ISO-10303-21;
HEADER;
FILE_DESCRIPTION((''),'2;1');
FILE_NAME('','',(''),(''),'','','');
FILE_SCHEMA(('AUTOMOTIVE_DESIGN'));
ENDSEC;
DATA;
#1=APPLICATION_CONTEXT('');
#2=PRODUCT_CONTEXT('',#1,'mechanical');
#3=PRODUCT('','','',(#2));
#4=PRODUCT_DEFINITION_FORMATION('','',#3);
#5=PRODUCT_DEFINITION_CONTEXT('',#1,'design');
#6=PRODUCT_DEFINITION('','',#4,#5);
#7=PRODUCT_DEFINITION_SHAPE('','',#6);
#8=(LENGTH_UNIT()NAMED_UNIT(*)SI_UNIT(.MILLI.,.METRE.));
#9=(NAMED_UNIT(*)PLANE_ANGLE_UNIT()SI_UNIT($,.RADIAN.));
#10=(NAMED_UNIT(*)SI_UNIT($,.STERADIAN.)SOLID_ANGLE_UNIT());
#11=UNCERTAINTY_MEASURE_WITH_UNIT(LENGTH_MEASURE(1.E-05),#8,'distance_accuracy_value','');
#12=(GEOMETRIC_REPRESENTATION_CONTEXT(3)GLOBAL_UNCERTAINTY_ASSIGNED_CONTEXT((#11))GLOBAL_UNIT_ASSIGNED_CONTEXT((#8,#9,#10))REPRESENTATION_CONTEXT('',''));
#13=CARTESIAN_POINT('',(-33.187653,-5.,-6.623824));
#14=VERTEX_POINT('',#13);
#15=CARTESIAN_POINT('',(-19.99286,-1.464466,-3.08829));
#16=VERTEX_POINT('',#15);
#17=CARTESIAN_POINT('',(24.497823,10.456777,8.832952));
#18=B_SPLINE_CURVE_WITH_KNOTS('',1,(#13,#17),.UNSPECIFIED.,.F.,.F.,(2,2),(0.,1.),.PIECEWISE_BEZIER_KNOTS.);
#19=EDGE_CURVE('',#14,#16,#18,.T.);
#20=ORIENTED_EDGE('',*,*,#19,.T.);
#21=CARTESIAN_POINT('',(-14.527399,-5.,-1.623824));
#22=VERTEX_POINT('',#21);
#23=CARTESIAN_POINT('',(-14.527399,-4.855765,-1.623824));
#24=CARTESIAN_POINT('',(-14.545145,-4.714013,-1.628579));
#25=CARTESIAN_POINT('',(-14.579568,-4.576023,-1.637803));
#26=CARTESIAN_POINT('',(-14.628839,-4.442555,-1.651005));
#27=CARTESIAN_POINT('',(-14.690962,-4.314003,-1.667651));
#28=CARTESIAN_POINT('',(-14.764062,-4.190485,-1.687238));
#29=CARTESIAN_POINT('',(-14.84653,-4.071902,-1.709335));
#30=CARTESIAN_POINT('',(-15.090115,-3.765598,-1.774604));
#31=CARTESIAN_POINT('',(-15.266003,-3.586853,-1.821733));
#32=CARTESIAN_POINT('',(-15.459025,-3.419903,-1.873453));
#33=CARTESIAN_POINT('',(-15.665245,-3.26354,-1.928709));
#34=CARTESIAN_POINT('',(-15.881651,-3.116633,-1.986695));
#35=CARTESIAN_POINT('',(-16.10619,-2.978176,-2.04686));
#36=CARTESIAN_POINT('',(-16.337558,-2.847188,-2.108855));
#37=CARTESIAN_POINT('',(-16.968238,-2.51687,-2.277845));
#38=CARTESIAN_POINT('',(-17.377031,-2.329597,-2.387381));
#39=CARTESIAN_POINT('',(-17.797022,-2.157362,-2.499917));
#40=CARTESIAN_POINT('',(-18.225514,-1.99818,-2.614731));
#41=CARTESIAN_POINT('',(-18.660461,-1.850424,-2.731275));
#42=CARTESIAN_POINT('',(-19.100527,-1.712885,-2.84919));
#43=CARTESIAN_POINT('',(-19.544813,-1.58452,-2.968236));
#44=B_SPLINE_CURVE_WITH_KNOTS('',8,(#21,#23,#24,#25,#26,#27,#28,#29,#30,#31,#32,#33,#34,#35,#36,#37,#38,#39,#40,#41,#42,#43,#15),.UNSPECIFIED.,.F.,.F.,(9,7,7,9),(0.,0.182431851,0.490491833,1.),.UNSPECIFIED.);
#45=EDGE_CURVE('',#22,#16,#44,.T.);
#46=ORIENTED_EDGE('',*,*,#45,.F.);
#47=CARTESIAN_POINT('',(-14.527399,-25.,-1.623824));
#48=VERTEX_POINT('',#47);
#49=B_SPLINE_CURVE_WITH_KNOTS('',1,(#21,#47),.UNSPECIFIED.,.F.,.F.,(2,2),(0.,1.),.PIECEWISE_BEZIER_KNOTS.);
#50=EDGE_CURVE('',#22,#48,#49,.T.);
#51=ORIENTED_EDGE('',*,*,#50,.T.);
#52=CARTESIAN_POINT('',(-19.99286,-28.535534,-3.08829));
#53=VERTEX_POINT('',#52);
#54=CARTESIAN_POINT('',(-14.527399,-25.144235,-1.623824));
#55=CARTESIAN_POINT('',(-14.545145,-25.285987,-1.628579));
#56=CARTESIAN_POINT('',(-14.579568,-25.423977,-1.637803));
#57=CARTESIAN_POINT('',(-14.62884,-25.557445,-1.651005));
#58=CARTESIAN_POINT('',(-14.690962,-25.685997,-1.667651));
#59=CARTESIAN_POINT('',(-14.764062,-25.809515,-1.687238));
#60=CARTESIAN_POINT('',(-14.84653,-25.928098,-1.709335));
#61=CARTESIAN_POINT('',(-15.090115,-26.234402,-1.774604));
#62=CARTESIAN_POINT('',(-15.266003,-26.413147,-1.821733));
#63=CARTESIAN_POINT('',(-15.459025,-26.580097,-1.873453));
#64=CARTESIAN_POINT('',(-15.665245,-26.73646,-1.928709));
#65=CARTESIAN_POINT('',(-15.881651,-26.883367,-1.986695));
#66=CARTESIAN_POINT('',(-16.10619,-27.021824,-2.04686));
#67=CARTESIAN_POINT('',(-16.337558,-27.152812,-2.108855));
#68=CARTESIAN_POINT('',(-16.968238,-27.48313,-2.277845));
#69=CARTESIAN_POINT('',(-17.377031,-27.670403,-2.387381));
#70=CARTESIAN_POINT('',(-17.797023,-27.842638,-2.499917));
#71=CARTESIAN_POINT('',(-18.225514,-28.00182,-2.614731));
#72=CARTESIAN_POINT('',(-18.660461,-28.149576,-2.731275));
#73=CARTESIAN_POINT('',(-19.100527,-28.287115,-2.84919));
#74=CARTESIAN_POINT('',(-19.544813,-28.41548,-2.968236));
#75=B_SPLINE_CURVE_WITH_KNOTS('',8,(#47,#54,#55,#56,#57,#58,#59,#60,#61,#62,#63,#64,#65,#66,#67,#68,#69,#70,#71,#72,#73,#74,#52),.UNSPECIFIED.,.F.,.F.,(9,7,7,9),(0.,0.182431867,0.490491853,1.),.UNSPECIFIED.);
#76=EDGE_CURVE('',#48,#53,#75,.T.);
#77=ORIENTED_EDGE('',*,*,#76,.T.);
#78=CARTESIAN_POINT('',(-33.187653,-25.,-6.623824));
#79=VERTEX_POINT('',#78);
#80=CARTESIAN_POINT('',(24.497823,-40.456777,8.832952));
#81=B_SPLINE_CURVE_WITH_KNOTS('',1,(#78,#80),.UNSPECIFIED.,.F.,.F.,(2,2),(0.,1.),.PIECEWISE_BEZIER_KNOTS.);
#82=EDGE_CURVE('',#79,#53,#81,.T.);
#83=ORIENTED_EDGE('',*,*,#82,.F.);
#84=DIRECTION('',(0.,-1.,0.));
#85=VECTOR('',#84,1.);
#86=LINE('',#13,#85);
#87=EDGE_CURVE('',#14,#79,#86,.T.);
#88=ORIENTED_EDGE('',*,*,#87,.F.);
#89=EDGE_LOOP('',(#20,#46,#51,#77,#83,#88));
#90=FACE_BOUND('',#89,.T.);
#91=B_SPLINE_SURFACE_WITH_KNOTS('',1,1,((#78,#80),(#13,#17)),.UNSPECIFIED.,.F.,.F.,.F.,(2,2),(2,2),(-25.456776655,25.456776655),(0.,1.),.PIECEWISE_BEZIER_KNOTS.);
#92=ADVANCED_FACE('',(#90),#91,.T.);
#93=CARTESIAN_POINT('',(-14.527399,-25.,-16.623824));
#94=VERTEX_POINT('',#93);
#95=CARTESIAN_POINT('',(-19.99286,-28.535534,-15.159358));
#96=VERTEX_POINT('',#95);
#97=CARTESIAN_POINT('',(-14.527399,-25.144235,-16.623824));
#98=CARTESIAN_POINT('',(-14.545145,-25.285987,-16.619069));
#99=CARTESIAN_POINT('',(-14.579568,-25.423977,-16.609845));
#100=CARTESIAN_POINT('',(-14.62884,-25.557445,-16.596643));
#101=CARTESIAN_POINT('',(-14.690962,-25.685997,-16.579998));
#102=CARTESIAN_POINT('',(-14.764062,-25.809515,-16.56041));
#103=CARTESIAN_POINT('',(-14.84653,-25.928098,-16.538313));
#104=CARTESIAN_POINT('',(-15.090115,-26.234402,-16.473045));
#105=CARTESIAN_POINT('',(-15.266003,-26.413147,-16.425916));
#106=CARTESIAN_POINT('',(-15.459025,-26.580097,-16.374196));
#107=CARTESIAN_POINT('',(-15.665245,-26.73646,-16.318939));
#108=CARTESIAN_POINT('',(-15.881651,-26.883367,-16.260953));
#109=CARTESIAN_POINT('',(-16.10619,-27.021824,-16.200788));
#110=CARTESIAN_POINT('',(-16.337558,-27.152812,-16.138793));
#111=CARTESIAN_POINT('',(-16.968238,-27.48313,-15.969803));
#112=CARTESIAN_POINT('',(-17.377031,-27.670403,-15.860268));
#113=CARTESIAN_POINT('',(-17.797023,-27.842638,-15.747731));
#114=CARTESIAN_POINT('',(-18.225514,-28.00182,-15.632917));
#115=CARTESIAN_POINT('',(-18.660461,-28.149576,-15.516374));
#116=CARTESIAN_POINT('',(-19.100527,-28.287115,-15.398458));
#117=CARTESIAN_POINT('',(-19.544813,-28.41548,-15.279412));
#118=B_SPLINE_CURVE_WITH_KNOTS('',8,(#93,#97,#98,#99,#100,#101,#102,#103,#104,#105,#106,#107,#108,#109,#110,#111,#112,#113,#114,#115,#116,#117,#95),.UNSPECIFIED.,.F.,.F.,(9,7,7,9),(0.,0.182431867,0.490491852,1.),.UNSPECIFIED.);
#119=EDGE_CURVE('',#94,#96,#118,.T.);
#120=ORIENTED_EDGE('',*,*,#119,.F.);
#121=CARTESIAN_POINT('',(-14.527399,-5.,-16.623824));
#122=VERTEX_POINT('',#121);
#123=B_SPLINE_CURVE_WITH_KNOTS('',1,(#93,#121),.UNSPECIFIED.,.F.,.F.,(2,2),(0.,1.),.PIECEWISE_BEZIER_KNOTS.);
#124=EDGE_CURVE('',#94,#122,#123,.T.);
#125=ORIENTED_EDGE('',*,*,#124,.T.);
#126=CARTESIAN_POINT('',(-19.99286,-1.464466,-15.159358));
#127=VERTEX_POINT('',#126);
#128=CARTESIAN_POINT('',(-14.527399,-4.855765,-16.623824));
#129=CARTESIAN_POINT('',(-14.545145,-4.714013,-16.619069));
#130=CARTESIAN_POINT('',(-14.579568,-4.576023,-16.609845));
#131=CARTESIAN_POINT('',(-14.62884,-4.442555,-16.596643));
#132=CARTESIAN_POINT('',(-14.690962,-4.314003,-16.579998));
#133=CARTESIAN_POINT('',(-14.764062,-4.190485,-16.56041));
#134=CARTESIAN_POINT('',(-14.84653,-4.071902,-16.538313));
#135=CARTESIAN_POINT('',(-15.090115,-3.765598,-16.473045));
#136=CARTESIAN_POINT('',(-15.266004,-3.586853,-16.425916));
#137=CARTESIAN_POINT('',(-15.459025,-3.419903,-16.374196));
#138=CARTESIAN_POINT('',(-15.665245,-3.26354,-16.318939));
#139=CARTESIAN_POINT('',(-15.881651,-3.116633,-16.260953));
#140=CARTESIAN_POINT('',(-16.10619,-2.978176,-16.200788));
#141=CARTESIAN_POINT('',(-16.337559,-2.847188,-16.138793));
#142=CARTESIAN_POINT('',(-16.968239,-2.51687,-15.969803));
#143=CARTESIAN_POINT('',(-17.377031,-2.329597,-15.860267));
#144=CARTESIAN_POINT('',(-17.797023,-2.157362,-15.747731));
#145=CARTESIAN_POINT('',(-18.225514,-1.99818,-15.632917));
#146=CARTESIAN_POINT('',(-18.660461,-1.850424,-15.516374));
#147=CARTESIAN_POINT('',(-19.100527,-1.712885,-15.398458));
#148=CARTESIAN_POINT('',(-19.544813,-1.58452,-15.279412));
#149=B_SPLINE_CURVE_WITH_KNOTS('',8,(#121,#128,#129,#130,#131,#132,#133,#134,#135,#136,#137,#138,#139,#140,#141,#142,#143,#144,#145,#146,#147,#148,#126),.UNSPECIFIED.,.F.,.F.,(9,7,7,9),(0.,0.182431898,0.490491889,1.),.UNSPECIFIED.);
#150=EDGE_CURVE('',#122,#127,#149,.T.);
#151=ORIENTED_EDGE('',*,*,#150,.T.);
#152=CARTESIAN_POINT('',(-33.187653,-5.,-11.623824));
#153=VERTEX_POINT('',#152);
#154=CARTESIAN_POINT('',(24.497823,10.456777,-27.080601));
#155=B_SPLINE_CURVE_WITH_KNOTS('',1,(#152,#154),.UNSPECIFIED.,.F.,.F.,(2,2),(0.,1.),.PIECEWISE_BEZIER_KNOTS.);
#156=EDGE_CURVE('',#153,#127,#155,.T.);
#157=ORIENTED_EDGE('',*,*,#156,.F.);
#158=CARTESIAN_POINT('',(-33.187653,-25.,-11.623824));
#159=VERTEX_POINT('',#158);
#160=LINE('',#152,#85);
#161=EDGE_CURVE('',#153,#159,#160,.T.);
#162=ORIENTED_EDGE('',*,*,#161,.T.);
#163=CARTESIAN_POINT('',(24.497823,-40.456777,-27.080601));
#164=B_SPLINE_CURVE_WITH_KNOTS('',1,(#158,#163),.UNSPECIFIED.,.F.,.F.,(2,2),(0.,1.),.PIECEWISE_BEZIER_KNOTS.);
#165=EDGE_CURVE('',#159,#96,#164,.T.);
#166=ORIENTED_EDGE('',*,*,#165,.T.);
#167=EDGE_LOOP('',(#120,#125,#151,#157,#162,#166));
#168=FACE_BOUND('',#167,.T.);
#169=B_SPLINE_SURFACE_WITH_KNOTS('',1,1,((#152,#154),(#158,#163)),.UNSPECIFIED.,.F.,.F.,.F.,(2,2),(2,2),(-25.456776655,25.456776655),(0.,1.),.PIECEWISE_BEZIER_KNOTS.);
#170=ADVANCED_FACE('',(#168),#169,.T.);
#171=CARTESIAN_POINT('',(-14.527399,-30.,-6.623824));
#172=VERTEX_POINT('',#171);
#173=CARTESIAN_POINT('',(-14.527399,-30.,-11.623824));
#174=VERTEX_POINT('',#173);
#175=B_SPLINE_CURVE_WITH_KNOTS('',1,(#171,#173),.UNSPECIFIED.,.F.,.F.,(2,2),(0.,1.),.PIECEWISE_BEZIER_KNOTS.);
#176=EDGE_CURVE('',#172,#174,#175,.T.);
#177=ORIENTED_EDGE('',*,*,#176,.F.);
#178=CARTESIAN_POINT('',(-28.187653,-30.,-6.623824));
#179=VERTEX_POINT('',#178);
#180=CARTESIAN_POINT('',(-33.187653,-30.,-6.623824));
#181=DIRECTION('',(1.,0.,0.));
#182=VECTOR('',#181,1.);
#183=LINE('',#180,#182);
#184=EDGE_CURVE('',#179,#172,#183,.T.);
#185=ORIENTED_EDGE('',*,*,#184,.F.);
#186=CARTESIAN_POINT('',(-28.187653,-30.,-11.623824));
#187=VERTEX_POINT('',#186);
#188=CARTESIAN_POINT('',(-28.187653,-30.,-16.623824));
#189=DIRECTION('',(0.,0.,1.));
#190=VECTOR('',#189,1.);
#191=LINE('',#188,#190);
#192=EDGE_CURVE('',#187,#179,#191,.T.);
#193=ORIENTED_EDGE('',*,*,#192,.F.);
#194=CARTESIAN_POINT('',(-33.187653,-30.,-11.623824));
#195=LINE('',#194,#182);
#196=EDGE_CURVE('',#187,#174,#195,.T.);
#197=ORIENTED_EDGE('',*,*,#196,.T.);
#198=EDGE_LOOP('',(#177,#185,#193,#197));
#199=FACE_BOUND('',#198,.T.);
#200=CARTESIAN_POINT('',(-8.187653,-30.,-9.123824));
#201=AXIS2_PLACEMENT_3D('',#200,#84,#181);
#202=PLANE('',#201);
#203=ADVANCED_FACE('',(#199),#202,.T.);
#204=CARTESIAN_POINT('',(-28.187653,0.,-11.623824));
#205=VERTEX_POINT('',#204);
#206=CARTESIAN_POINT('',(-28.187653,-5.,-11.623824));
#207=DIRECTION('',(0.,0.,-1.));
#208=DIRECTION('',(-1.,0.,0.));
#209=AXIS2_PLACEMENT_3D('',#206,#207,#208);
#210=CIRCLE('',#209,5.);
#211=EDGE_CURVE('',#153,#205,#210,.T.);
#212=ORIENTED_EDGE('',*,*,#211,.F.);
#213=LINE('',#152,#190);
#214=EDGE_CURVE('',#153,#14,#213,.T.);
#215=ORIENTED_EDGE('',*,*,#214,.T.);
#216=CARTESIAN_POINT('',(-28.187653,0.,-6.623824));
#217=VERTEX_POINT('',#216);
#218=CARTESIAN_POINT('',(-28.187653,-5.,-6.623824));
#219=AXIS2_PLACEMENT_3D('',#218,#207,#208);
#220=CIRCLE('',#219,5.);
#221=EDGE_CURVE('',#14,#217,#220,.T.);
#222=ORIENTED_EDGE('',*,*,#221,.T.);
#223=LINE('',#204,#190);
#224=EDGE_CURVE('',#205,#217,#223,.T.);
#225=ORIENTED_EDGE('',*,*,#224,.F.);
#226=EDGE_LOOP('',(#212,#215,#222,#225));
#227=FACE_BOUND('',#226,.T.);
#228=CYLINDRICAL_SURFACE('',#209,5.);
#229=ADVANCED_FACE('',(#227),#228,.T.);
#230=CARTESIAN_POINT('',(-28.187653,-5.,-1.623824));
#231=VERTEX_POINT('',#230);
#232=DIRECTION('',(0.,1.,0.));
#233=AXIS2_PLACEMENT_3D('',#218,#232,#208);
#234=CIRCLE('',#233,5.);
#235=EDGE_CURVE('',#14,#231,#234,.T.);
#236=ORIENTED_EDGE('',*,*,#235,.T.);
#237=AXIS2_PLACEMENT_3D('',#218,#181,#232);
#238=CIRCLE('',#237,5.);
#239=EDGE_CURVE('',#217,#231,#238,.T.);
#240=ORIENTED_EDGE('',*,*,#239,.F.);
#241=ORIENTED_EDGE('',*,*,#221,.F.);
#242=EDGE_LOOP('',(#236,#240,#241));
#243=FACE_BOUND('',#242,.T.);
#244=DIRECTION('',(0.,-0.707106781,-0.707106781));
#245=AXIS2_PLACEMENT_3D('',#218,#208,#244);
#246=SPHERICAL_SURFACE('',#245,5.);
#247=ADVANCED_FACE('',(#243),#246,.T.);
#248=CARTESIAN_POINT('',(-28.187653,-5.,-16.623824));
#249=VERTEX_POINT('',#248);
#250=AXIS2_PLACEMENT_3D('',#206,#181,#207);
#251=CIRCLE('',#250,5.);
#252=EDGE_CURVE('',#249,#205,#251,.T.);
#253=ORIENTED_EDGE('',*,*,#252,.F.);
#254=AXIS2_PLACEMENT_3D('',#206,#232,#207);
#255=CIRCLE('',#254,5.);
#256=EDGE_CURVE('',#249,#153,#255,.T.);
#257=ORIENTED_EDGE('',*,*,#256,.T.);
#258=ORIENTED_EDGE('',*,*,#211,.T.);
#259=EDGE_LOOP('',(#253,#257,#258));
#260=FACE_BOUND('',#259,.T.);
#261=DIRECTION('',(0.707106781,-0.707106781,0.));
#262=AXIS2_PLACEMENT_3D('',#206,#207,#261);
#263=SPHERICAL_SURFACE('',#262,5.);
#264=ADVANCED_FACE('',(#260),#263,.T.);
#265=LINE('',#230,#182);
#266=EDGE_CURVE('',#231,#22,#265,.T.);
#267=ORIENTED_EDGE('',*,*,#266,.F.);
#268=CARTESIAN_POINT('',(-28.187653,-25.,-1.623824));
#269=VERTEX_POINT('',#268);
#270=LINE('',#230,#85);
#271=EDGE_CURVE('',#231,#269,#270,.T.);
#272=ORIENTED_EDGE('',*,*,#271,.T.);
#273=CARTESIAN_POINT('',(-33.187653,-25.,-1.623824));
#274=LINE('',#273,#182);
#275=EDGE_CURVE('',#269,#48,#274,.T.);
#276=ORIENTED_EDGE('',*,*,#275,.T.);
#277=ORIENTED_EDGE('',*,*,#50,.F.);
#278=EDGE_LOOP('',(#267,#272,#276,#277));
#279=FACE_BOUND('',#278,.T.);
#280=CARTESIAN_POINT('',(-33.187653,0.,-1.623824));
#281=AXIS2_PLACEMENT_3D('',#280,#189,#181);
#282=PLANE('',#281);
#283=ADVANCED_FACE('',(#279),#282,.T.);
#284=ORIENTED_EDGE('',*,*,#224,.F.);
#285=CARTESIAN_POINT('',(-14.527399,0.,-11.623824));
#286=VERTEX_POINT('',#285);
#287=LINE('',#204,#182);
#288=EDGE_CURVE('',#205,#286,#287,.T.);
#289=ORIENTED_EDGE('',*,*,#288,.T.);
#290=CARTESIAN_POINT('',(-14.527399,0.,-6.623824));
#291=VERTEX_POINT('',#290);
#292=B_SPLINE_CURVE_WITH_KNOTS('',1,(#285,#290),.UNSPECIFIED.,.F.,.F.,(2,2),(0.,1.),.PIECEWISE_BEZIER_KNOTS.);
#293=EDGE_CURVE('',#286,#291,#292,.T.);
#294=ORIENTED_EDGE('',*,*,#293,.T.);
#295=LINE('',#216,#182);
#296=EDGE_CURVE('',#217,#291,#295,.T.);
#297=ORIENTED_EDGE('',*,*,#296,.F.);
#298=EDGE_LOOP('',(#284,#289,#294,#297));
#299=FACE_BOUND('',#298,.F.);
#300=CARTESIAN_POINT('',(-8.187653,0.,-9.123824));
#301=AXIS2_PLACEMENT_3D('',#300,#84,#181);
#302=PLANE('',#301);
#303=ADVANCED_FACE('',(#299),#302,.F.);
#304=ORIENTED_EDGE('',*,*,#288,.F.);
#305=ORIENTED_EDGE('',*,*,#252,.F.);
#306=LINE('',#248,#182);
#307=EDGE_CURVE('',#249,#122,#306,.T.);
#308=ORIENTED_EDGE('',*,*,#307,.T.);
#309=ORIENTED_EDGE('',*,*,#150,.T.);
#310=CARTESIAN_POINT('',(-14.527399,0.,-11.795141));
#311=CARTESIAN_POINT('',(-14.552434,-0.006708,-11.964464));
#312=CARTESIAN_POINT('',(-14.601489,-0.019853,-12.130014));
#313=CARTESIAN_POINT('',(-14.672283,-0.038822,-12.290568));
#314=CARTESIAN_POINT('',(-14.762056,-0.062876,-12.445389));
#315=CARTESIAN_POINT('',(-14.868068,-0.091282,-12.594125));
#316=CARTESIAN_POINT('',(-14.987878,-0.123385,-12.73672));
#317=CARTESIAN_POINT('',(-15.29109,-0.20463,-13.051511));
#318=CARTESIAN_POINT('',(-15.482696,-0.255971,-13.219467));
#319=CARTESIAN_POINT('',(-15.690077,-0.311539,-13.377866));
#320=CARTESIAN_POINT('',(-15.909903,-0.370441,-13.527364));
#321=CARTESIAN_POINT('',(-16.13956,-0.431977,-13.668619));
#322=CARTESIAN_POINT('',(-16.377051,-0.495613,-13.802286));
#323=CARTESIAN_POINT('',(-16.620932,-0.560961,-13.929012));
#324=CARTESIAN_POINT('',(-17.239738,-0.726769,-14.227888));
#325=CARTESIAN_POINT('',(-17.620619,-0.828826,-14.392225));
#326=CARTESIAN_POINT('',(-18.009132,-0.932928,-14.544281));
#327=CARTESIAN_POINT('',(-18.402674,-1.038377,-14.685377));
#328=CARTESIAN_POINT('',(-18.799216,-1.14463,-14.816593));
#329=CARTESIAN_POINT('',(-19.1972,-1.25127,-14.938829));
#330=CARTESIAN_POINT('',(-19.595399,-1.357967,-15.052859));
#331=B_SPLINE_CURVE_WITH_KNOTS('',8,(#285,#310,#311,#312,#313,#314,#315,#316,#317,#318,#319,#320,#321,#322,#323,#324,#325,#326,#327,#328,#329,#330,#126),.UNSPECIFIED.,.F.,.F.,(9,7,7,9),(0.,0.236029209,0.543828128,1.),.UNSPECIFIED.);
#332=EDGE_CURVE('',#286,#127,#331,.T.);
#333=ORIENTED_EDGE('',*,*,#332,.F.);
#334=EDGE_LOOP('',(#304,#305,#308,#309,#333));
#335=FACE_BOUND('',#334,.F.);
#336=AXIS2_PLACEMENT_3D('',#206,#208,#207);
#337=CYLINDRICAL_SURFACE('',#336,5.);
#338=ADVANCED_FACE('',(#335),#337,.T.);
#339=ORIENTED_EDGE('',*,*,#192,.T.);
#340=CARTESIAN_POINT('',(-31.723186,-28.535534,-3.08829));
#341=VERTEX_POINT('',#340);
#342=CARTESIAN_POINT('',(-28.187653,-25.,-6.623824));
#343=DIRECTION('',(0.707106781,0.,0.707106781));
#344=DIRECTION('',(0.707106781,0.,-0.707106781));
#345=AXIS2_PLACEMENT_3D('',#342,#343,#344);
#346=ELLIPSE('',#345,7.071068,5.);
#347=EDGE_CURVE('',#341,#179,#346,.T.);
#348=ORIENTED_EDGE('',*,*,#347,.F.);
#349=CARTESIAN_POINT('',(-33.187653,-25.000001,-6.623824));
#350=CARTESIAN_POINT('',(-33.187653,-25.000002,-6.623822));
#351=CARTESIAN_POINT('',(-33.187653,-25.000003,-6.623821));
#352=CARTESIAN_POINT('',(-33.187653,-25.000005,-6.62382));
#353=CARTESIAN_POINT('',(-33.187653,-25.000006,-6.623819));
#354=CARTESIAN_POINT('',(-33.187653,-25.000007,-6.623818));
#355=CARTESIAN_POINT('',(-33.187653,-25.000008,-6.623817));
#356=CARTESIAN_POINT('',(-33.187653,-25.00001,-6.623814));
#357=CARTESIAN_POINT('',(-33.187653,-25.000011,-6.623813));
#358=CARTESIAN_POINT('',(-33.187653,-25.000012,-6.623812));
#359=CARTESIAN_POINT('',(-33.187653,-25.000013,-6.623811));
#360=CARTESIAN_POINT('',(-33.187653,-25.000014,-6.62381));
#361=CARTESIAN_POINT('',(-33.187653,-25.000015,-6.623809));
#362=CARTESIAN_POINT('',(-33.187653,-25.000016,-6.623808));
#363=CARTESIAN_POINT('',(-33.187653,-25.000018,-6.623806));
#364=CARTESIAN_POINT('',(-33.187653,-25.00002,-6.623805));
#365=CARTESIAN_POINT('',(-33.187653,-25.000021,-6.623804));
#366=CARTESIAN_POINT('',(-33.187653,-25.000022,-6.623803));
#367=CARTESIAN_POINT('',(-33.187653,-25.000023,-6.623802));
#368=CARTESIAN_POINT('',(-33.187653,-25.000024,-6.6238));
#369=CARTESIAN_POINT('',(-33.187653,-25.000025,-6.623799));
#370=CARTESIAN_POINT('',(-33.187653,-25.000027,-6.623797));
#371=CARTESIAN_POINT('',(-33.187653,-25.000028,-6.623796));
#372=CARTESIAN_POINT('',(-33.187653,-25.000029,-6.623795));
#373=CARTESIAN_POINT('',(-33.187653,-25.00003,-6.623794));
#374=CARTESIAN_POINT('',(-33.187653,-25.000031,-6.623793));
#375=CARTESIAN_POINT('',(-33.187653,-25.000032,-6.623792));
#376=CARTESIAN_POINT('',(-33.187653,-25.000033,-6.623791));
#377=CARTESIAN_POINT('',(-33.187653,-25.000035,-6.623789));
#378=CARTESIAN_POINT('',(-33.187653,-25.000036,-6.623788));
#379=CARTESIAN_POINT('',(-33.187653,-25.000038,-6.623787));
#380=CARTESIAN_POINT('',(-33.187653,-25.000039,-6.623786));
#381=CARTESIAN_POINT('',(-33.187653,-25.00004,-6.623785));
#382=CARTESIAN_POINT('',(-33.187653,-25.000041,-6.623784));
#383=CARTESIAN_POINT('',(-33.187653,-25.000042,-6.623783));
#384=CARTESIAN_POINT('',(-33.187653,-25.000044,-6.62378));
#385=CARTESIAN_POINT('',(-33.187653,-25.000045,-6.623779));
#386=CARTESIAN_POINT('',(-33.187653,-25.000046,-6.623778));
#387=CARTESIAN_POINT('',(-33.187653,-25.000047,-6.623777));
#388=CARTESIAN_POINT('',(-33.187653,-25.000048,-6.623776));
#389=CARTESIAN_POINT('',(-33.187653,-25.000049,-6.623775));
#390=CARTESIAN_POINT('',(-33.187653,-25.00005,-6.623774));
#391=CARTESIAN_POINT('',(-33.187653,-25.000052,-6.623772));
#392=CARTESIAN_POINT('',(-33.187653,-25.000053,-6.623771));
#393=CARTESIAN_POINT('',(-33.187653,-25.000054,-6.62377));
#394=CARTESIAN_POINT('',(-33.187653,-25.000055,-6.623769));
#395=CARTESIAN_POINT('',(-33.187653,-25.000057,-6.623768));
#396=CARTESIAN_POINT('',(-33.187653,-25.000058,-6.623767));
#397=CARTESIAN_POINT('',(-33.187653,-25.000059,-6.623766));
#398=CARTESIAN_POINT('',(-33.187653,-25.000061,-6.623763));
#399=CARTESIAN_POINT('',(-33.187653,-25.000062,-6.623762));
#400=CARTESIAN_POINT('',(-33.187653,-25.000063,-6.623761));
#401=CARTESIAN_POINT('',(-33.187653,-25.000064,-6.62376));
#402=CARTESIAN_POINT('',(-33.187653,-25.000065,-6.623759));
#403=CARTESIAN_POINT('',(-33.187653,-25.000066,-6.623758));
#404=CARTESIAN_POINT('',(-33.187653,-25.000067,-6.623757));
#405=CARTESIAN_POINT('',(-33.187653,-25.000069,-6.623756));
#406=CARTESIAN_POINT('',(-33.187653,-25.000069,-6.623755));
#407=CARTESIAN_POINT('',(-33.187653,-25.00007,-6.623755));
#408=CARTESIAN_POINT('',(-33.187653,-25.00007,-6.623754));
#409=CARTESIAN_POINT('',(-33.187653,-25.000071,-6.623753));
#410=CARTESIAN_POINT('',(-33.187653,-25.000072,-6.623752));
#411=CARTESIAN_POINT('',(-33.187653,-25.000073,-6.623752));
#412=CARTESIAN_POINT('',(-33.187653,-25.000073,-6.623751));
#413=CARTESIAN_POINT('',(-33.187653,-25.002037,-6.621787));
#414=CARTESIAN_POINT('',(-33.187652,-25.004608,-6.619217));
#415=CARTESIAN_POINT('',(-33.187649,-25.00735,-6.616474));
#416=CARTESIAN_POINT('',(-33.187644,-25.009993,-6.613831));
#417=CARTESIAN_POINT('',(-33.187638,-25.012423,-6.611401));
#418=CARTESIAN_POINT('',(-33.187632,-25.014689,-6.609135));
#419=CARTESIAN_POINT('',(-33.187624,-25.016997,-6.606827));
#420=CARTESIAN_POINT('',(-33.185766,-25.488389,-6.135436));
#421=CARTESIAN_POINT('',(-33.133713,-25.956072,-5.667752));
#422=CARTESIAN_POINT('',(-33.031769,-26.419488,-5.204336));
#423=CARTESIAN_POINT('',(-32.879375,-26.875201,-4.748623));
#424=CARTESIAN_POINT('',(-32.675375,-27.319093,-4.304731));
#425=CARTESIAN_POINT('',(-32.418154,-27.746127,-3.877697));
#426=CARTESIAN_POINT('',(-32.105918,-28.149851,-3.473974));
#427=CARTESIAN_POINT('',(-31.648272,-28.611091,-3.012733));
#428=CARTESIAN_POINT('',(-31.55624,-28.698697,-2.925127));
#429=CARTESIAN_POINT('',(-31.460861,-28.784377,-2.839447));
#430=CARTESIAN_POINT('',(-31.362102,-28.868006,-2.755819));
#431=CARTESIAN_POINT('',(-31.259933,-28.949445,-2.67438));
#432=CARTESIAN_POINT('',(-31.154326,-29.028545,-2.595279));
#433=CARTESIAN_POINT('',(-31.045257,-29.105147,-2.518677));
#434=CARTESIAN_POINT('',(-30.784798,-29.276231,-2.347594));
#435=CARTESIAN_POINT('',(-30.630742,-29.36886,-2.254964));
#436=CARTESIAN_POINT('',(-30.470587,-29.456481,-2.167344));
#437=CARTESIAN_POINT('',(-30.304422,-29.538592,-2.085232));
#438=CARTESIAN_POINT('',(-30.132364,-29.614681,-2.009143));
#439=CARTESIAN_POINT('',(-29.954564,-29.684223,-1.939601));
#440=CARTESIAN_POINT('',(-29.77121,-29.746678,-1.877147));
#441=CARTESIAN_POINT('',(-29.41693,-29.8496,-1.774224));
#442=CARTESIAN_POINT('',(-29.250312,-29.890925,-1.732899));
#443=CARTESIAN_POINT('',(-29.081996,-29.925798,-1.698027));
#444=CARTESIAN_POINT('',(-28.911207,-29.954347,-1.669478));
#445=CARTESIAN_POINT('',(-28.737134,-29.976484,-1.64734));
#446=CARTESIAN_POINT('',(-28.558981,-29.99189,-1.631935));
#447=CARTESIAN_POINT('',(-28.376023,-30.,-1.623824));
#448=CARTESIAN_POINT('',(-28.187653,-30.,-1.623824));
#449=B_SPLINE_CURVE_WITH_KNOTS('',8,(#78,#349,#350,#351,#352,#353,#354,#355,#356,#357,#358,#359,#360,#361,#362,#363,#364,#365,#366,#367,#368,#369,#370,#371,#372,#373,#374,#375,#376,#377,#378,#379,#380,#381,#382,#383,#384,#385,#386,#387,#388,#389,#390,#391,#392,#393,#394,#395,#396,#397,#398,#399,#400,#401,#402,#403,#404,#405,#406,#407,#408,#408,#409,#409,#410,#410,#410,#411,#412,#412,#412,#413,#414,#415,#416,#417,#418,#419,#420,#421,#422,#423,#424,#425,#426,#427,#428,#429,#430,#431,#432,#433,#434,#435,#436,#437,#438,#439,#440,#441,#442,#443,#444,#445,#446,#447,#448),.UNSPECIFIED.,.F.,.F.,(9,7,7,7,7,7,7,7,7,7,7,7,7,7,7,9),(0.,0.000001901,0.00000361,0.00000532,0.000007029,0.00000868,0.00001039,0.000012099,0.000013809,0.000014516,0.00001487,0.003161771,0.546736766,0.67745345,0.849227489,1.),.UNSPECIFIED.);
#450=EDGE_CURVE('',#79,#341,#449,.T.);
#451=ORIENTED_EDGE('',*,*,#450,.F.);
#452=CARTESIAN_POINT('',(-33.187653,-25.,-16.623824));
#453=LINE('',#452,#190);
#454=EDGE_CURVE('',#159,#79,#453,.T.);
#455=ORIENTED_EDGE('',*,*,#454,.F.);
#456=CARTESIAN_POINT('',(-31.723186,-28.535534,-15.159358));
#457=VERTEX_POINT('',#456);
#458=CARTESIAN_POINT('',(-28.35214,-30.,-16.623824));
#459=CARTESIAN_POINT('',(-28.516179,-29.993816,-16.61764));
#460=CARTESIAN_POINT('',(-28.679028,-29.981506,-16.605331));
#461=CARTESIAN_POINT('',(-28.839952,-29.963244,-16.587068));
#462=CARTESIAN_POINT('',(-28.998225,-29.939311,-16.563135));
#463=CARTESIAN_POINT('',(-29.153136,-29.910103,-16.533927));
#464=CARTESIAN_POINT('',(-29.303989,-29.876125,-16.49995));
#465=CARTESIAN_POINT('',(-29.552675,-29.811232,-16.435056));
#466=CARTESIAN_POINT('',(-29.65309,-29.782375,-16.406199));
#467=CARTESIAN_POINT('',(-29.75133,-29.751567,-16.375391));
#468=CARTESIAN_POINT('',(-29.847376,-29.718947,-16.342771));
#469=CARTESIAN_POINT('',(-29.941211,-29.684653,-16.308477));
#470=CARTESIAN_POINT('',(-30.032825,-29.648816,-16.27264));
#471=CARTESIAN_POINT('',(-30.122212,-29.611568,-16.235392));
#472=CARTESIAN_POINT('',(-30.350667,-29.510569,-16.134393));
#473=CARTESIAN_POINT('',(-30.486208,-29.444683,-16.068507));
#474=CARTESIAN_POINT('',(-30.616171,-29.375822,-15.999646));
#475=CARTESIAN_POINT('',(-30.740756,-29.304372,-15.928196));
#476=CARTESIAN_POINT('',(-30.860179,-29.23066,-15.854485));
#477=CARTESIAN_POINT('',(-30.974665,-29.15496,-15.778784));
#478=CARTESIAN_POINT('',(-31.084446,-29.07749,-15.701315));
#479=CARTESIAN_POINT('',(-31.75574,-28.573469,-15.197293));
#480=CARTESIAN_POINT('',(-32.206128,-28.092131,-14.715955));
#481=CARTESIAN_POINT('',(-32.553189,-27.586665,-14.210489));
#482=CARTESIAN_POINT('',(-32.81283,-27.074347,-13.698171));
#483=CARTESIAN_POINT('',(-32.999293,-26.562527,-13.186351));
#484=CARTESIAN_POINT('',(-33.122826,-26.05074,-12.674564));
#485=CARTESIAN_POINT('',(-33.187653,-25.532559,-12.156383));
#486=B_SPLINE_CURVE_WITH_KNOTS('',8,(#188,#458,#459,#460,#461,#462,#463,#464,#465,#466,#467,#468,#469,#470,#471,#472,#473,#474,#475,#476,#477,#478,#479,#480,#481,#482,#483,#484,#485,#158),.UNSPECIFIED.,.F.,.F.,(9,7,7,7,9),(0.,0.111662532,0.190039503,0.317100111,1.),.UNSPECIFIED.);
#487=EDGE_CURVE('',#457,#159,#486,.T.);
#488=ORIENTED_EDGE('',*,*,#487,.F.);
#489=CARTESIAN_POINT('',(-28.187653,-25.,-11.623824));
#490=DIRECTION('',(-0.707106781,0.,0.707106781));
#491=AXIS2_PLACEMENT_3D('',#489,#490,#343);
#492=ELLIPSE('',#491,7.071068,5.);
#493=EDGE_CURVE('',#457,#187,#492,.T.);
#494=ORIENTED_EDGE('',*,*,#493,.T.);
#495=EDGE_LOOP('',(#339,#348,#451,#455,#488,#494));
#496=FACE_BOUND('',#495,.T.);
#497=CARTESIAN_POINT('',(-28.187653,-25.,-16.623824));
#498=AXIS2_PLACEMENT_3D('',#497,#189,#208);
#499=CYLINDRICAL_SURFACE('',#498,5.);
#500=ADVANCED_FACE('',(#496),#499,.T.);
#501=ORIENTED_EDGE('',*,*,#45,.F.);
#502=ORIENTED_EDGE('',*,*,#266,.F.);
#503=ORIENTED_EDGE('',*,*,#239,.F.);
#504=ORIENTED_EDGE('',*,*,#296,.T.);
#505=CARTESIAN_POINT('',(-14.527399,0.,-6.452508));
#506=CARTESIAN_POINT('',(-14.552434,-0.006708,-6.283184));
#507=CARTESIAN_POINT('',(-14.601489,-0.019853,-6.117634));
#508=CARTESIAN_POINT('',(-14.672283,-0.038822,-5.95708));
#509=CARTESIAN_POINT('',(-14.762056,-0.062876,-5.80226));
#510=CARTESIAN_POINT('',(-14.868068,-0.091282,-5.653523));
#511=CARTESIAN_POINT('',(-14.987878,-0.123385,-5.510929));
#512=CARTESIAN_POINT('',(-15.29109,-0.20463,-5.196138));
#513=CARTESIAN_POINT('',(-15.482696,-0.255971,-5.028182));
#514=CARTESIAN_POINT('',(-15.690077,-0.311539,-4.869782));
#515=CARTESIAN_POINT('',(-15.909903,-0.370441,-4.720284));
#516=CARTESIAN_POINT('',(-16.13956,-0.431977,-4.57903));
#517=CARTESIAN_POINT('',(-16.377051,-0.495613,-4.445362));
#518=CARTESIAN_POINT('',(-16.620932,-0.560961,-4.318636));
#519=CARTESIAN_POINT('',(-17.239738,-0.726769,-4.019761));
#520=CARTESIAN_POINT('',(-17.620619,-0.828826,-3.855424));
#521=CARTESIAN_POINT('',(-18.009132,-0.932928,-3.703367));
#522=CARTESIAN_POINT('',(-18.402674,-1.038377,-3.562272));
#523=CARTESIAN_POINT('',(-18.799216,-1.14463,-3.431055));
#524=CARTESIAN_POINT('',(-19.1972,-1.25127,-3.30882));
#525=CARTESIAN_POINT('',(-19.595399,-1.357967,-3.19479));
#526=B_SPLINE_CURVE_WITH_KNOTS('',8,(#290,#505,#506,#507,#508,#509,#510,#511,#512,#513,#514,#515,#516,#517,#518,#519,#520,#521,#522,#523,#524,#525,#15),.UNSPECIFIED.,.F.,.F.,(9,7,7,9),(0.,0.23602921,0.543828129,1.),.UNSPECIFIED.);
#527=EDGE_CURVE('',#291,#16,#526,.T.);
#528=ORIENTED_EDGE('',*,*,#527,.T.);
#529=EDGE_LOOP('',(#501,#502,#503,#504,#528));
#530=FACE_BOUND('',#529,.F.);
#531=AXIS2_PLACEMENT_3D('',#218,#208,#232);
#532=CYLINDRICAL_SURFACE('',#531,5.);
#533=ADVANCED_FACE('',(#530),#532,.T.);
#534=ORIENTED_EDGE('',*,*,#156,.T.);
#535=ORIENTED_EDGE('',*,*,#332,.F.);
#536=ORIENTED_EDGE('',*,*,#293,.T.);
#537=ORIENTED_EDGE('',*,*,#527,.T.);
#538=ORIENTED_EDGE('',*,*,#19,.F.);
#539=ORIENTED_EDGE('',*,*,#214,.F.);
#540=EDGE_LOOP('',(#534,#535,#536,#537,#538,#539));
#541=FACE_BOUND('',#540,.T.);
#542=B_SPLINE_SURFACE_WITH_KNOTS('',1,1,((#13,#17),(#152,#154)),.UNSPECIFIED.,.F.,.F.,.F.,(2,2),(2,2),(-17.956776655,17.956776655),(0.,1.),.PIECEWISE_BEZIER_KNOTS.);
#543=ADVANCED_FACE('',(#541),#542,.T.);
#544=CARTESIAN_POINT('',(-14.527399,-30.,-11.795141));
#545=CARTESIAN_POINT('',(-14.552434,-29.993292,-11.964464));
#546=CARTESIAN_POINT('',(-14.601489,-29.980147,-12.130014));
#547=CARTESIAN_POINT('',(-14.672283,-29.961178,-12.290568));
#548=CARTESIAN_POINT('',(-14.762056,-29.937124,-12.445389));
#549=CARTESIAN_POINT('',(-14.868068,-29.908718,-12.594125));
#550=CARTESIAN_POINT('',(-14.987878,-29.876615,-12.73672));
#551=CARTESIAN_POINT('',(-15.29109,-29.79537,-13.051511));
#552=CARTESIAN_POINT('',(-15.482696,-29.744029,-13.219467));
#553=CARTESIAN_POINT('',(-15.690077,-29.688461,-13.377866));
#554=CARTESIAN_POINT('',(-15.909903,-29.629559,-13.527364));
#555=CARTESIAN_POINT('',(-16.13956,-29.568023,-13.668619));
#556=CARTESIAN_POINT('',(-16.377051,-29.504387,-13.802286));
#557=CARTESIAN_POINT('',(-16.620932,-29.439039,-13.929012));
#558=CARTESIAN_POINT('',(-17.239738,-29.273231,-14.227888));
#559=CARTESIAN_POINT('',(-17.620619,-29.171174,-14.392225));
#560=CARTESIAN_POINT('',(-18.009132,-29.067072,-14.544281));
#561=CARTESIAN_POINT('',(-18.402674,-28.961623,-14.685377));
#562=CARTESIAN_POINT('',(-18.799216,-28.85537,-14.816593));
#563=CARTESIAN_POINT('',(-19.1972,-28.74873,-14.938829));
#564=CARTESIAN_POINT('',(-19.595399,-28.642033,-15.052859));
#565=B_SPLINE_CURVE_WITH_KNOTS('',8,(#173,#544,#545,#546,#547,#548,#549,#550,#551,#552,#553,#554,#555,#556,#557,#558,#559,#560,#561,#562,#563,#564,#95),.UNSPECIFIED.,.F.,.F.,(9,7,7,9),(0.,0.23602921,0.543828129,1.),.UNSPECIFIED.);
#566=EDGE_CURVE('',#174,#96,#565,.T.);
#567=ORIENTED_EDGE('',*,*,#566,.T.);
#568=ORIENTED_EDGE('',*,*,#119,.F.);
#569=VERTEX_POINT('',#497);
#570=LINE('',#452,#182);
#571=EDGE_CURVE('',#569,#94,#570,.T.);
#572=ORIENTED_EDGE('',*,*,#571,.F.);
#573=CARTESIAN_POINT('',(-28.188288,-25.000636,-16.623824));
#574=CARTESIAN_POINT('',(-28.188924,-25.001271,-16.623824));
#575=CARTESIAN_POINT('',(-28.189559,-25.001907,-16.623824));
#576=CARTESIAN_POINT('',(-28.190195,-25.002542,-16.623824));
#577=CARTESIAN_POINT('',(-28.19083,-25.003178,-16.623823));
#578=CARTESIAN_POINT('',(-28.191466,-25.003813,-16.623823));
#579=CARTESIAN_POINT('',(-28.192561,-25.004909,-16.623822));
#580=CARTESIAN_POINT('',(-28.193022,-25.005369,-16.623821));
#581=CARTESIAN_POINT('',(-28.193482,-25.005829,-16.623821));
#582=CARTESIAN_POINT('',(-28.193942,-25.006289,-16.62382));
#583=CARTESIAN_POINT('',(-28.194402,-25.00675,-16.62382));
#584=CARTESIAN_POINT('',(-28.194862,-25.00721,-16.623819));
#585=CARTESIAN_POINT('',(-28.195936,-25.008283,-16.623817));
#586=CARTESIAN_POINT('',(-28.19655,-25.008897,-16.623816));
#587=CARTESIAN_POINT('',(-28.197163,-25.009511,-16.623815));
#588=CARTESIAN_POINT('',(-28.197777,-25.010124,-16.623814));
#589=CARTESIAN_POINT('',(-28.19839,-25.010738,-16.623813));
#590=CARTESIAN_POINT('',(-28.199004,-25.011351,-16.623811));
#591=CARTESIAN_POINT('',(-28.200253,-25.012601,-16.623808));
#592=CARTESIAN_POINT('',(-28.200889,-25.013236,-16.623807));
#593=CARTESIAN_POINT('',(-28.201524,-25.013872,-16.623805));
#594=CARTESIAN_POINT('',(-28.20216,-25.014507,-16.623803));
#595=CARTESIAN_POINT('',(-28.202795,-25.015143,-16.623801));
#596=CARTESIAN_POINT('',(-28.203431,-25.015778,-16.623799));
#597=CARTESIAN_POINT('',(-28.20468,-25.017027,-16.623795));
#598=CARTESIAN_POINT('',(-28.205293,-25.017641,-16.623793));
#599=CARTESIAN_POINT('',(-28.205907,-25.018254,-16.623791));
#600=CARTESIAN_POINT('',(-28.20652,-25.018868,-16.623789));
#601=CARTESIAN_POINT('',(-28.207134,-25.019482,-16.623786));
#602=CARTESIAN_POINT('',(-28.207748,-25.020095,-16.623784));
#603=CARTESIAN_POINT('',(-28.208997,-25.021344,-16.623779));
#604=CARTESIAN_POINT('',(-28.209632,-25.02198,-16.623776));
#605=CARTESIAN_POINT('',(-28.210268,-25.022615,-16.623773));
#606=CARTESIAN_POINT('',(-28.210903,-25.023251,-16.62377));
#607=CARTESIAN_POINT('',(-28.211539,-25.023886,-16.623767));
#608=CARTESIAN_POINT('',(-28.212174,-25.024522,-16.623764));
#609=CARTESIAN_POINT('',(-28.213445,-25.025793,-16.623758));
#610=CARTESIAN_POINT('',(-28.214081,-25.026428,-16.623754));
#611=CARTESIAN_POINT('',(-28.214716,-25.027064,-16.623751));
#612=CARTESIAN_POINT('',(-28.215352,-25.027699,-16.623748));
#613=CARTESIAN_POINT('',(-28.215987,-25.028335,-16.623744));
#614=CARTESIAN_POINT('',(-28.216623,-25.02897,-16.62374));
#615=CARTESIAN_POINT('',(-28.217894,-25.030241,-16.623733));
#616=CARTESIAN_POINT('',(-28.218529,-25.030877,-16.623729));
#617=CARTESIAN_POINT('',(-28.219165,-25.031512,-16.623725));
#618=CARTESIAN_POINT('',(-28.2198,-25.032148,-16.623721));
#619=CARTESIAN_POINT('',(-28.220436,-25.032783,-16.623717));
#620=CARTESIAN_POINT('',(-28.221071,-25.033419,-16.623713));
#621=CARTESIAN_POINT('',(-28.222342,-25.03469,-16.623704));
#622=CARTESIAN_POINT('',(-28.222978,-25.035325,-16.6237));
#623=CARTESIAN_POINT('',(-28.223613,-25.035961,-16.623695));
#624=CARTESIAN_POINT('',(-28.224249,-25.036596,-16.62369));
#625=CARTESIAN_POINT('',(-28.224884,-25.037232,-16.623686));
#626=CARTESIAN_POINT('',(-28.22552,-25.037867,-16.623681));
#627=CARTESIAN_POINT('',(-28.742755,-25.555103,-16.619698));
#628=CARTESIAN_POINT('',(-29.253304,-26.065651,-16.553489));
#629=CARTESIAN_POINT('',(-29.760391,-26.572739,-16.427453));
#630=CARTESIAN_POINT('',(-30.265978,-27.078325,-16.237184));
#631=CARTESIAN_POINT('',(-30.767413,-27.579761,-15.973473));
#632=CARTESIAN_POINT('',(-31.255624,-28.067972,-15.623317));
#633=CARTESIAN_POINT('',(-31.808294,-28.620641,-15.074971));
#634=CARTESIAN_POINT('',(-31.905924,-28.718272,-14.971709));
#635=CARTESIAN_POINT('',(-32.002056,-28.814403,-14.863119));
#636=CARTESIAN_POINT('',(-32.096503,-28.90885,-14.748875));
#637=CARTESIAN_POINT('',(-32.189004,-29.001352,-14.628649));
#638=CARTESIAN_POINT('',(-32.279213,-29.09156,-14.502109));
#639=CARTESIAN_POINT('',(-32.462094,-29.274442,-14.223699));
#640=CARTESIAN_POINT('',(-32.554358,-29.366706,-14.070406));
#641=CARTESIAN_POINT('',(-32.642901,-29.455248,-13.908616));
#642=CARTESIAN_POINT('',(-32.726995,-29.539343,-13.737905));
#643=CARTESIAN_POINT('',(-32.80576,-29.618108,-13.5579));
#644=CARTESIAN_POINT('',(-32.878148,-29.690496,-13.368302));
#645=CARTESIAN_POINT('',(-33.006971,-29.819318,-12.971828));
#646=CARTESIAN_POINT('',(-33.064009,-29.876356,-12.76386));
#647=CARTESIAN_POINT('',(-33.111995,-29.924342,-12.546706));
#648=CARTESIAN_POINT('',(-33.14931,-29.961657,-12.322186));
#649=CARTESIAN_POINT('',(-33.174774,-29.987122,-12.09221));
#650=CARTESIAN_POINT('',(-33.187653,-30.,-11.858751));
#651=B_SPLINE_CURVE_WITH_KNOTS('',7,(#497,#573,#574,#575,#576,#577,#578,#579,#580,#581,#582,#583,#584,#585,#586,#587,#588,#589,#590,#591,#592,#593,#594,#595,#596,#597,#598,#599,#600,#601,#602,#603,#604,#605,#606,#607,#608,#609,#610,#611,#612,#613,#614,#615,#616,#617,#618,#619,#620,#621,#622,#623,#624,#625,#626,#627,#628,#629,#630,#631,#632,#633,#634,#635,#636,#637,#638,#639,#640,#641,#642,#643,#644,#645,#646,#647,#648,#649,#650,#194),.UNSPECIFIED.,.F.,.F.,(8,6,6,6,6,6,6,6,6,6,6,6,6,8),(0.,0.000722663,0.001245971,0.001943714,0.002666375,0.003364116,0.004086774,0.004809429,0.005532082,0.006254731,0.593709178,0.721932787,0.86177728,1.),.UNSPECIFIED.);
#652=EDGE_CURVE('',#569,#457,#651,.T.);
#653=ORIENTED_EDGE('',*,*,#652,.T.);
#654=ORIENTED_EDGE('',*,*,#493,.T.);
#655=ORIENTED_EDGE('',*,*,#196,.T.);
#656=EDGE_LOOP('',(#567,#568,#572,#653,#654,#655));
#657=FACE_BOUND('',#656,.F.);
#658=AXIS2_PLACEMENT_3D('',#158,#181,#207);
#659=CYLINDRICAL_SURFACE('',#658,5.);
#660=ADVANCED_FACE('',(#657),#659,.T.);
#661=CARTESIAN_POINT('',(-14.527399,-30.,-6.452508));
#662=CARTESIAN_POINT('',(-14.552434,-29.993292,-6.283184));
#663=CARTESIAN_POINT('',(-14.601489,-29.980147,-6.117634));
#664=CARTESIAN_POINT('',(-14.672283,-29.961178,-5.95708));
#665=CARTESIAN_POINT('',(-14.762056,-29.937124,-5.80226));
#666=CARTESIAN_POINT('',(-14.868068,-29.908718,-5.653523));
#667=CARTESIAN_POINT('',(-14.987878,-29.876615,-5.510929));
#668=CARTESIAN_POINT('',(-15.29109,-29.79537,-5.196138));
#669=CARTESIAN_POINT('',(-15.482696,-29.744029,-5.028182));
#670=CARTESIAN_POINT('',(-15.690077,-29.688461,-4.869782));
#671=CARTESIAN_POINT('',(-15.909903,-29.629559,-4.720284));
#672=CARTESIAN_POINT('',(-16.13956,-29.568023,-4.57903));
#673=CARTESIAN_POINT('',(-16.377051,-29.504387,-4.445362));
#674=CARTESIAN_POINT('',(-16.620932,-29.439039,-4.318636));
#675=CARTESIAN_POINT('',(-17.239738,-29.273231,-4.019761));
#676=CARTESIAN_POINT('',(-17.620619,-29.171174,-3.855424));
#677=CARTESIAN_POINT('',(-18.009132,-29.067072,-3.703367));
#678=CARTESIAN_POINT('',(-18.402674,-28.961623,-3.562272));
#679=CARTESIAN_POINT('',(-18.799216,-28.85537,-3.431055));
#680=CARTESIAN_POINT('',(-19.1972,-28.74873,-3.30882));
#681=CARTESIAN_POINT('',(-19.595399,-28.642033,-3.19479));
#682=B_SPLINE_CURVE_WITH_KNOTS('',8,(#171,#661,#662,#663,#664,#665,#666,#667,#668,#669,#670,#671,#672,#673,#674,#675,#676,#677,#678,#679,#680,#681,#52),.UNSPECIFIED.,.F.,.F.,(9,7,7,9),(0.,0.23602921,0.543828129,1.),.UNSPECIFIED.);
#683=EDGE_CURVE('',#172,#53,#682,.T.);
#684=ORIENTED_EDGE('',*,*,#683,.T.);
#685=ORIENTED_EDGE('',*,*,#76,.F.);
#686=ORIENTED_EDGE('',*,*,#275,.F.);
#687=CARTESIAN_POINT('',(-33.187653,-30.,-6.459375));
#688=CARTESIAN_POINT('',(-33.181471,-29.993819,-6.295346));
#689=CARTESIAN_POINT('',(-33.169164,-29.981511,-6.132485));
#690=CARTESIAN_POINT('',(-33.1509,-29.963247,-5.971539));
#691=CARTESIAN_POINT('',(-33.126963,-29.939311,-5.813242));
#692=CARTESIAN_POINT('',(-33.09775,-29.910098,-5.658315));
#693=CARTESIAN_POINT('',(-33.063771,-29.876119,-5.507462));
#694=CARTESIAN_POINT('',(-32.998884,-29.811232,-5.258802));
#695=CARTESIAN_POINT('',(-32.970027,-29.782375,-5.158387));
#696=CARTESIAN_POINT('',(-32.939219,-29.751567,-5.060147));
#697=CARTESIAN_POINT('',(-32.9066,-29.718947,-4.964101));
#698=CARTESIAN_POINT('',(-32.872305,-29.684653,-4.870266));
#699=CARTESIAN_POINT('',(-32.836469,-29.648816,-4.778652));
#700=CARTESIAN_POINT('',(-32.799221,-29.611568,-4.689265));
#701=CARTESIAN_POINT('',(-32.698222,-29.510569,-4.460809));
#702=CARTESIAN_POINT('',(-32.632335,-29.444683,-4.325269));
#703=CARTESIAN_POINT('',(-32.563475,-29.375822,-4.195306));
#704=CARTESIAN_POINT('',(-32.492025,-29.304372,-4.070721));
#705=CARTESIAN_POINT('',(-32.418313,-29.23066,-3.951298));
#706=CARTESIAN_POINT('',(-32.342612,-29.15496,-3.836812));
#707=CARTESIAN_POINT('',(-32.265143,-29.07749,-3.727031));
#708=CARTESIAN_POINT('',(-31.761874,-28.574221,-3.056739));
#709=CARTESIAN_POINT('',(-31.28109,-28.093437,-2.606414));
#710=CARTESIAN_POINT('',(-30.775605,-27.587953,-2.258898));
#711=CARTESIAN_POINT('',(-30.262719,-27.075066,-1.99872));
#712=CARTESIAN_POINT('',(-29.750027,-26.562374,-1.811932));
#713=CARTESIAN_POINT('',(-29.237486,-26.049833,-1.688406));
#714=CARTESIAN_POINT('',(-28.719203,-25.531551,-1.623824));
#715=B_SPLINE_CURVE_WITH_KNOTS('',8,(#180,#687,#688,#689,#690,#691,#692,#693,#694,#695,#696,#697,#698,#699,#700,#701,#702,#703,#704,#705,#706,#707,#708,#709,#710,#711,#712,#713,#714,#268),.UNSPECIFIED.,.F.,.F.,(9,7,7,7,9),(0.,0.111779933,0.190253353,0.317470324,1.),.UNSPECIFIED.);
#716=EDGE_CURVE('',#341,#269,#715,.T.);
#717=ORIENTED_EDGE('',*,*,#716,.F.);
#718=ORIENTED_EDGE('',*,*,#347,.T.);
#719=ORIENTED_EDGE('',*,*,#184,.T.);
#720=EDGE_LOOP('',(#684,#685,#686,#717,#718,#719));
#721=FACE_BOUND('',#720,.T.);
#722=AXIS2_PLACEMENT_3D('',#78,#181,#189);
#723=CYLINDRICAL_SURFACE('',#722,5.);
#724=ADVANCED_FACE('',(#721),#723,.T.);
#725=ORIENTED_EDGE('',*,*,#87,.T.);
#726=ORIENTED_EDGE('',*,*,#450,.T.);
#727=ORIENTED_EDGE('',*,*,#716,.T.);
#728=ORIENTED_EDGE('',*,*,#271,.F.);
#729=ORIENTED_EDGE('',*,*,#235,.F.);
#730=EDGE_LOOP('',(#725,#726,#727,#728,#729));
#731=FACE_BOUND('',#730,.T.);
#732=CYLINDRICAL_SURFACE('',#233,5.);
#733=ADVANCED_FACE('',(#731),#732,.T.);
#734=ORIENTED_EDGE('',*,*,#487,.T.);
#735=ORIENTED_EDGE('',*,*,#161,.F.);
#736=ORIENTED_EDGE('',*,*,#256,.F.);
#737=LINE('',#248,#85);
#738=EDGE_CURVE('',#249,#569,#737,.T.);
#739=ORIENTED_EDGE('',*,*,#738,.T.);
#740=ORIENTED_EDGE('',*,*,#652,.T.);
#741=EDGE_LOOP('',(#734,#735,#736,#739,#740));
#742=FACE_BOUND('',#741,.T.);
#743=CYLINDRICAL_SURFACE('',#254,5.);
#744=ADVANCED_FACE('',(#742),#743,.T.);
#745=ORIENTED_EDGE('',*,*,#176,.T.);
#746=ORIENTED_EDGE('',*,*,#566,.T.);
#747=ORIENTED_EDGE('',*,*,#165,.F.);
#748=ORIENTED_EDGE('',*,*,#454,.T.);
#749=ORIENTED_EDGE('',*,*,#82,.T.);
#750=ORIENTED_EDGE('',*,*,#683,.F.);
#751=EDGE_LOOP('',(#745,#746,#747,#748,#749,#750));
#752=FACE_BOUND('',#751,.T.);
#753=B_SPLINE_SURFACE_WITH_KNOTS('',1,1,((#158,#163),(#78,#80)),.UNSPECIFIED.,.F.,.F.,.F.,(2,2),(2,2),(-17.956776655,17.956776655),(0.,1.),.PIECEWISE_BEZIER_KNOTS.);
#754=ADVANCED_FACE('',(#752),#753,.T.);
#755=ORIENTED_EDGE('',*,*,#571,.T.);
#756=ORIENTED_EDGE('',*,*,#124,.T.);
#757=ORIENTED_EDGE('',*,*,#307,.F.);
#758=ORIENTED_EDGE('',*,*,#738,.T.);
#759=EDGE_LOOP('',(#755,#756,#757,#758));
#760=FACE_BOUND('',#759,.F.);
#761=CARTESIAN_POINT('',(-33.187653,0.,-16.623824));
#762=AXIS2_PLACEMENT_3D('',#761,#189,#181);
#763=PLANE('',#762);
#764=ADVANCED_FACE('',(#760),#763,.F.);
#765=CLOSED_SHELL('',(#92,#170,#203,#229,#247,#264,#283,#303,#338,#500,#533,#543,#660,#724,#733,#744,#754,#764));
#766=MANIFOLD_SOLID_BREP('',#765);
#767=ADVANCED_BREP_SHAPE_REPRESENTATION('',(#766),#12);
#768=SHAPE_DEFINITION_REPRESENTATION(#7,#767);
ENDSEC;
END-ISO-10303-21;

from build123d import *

# Parameters (mm, degrees)
F0_W         = 50
F0_H         = 15
F1_DEPTH     = 30
F2_R         = 5
F3_T1_DEPTH  = 52.5
F3_T3_DEPTH  = 5
F3_T5_DEPTH  = 32.5
F3_S9_W      = 5.1
F3_S9_H      = 5.1
F3_T10_DEPTH = 5.1
F3_S15_W     = 5.1
F3_S15_H     = 5.1
F3_T16_DEPTH = 5.1
F4_DEPTH     = 20
F1_FACE1_W   = 20
F1_FACE1_H   = 5
F5_DEPTH     = 57.6854757965
F5_TAPER     = -15


# Not quite as in the source:
# - a fillet or chamfer that OpenCascade refuses, or shapes differently, is made with other operations: its cross-section is extruded or revolved along the edge and cut away or added


with BuildPart() as f1:
    # F0 (on Front) → F1 (new body)
    with BuildSketch(Plane.XZ):
        with Locations((-8.187652571, -9.1238242388)):
            Rectangle(F0_W, F0_H)
    extrude(amount=F1_DEPTH)

    # F2
    f2_edges = [f1.edges().sort_by_distance(p)[0] for p in [
        (16.812347, -15, -16.623824),
        (16.812347, -15, -1.623824),
        (16.812347, 0, -9.123824),
        (16.812347, -30, -9.123824),
        (-8.187653, -30, -16.623824),
        (-8.187653, -30, -1.623824),
        (-33.187653, -30, -9.123824),
    ]]
    fillet(f2_edges, radius=F2_R)

    # F3: fillet of radius 5 on 7 edges, made by hand

    # F3_s2 → F3_t1 (cut)
    with BuildSketch(Plane.YZ.offset(-28.187652571)):
        with BuildLine():
            ThreePointArc((-5, -16.6238242388), (-1.4644660941, -15.1593581447), (0, -11.6238242388))
            Line((0, -11.6238242388), (0, -16.6238242388))
            Line((0, -16.6238242388), (-5, -16.6238242388))
        make_face()
        with BuildLine():
            ThreePointArc((0, -6.6238242388), (-1.4644660941, -3.0882903328), (-5, -1.6238242388))
            Line((-5, -1.6238242388), (0, -1.6238242388))
            Line((0, -1.6238242388), (0, -6.6238242388))
        make_face()
    extrude(amount=F3_T1_DEPTH, mode=Mode.SUBTRACT)

    # F3_s4 → F3_t3 (cut)
    with BuildSketch(Plane.XY.offset(-11.6238242388)):
        with BuildLine():
            ThreePointArc((-33.187652571, -5), (-31.7231864769, -1.4644660941), (-28.187652571, 0))
            Line((-28.187652571, 0), (-33.187652571, 0))
            Line((-33.187652571, 0), (-33.187652571, -5))
        make_face()
    extrude(amount=F3_T3_DEPTH, mode=Mode.SUBTRACT)

    # F3_s6 → F3_t5 (cut)
    with BuildSketch(Plane.XZ.offset(5)):
        with BuildLine():
            ThreePointArc((-33.187652571, -6.6238242388), (-31.7231864769, -3.0882903328), (-28.187652571, -1.6238242388))
            Line((-28.187652571, -1.6238242388), (-33.187652571, -1.6238242388))
            Line((-33.187652571, -1.6238242388), (-33.187652571, -6.6238242388))
        make_face()
        with BuildLine():
            ThreePointArc((-28.187652571, -16.6238242388), (-31.7231864769, -15.1593581447), (-33.187652571, -11.6238242388))
            Line((-33.187652571, -11.6238242388), (-33.187652571, -16.6238242388))
            Line((-33.187652571, -16.6238242388), (-28.187652571, -16.6238242388))
        make_face()
    extrude(amount=F3_T5_DEPTH, mode=Mode.SUBTRACT)


with BuildPart() as f3_tool8:
    # F3_s9 → F3_t10 (new body)
    with BuildSketch(Plane.XY.offset(-11.6238242388)):
        with Locations((-30.737652571, -2.45)):
            Rectangle(F3_S9_W, F3_S9_H)
    extrude(amount=-F3_T10_DEPTH)

    # F3_s11 → F3_t12 (revolve, cut)
    with BuildSketch(Plane(origin=(-28.187652571, -5, -11.6238242388), x_dir=(0.7071067812, -0.7071067812, 0), z_dir=(0.7071067812, 0.7071067812, 0))):
        with BuildLine():
            ThreePointArc((0, -5), (5, 0), (0, 5))
            Line((0, 5), (0, -5))
        make_face()
    revolve(axis=Axis((-28.187652571, -5, -11.6238242388), (0, 0, -1)), mode=Mode.SUBTRACT)


with BuildPart() as f1_1:
    add(f1.part)

    # F3_t7: cut F3_tool8
    add(f3_tool8.part, mode=Mode.SUBTRACT)


with BuildPart() as f3_tool14:
    # F3_s15 → F3_t16 (new body)
    with BuildSketch(Plane.YZ.offset(-28.187652571)):
        with Locations((-2.45, -4.0738242388)):
            Rectangle(F3_S15_W, F3_S15_H)
    extrude(amount=-F3_T16_DEPTH)

    # F3_s17 → F3_t18 (revolve, cut)
    with BuildSketch(Plane(origin=(-28.187652571, -5, -6.6238242388), x_dir=(0, -0.7071067812, -0.7071067812), z_dir=(0, 0.7071067812, -0.7071067812))):
        with BuildLine():
            ThreePointArc((0, -5), (5, 0), (0, 5))
            Line((0, 5), (0, -5))
        make_face()
    revolve(axis=Axis((-28.187652571, -5, -6.6238242388), (-1, 0, 0)), mode=Mode.SUBTRACT)


with BuildPart() as f1_2:
    add(f1_1.part)

    # F3_t13: cut F3_tool14
    add(f3_tool14.part, mode=Mode.SUBTRACT)

    # F4 (cut): a face of the model
    f4_faces = [f1_2.faces().sort_by_distance(p)[0] for p in [
        (16.812347429, -15, -9.1238242388),
    ]]
    extrude(f4_faces, amount=-F4_DEPTH, mode=Mode.SUBTRACT)

    # F1_face1 (on face) → F5 (cut)
    with BuildSketch(Plane(origin=(-33.187652571, -15, -9.1238242388), x_dir=(0, -1, 0), z_dir=(-1, 0, 0))):
        Rectangle(F1_FACE1_W, F1_FACE1_H)
    extrude(amount=-F5_DEPTH, taper=F5_TAPER, mode=Mode.SUBTRACT)


solid = f1_2.part
